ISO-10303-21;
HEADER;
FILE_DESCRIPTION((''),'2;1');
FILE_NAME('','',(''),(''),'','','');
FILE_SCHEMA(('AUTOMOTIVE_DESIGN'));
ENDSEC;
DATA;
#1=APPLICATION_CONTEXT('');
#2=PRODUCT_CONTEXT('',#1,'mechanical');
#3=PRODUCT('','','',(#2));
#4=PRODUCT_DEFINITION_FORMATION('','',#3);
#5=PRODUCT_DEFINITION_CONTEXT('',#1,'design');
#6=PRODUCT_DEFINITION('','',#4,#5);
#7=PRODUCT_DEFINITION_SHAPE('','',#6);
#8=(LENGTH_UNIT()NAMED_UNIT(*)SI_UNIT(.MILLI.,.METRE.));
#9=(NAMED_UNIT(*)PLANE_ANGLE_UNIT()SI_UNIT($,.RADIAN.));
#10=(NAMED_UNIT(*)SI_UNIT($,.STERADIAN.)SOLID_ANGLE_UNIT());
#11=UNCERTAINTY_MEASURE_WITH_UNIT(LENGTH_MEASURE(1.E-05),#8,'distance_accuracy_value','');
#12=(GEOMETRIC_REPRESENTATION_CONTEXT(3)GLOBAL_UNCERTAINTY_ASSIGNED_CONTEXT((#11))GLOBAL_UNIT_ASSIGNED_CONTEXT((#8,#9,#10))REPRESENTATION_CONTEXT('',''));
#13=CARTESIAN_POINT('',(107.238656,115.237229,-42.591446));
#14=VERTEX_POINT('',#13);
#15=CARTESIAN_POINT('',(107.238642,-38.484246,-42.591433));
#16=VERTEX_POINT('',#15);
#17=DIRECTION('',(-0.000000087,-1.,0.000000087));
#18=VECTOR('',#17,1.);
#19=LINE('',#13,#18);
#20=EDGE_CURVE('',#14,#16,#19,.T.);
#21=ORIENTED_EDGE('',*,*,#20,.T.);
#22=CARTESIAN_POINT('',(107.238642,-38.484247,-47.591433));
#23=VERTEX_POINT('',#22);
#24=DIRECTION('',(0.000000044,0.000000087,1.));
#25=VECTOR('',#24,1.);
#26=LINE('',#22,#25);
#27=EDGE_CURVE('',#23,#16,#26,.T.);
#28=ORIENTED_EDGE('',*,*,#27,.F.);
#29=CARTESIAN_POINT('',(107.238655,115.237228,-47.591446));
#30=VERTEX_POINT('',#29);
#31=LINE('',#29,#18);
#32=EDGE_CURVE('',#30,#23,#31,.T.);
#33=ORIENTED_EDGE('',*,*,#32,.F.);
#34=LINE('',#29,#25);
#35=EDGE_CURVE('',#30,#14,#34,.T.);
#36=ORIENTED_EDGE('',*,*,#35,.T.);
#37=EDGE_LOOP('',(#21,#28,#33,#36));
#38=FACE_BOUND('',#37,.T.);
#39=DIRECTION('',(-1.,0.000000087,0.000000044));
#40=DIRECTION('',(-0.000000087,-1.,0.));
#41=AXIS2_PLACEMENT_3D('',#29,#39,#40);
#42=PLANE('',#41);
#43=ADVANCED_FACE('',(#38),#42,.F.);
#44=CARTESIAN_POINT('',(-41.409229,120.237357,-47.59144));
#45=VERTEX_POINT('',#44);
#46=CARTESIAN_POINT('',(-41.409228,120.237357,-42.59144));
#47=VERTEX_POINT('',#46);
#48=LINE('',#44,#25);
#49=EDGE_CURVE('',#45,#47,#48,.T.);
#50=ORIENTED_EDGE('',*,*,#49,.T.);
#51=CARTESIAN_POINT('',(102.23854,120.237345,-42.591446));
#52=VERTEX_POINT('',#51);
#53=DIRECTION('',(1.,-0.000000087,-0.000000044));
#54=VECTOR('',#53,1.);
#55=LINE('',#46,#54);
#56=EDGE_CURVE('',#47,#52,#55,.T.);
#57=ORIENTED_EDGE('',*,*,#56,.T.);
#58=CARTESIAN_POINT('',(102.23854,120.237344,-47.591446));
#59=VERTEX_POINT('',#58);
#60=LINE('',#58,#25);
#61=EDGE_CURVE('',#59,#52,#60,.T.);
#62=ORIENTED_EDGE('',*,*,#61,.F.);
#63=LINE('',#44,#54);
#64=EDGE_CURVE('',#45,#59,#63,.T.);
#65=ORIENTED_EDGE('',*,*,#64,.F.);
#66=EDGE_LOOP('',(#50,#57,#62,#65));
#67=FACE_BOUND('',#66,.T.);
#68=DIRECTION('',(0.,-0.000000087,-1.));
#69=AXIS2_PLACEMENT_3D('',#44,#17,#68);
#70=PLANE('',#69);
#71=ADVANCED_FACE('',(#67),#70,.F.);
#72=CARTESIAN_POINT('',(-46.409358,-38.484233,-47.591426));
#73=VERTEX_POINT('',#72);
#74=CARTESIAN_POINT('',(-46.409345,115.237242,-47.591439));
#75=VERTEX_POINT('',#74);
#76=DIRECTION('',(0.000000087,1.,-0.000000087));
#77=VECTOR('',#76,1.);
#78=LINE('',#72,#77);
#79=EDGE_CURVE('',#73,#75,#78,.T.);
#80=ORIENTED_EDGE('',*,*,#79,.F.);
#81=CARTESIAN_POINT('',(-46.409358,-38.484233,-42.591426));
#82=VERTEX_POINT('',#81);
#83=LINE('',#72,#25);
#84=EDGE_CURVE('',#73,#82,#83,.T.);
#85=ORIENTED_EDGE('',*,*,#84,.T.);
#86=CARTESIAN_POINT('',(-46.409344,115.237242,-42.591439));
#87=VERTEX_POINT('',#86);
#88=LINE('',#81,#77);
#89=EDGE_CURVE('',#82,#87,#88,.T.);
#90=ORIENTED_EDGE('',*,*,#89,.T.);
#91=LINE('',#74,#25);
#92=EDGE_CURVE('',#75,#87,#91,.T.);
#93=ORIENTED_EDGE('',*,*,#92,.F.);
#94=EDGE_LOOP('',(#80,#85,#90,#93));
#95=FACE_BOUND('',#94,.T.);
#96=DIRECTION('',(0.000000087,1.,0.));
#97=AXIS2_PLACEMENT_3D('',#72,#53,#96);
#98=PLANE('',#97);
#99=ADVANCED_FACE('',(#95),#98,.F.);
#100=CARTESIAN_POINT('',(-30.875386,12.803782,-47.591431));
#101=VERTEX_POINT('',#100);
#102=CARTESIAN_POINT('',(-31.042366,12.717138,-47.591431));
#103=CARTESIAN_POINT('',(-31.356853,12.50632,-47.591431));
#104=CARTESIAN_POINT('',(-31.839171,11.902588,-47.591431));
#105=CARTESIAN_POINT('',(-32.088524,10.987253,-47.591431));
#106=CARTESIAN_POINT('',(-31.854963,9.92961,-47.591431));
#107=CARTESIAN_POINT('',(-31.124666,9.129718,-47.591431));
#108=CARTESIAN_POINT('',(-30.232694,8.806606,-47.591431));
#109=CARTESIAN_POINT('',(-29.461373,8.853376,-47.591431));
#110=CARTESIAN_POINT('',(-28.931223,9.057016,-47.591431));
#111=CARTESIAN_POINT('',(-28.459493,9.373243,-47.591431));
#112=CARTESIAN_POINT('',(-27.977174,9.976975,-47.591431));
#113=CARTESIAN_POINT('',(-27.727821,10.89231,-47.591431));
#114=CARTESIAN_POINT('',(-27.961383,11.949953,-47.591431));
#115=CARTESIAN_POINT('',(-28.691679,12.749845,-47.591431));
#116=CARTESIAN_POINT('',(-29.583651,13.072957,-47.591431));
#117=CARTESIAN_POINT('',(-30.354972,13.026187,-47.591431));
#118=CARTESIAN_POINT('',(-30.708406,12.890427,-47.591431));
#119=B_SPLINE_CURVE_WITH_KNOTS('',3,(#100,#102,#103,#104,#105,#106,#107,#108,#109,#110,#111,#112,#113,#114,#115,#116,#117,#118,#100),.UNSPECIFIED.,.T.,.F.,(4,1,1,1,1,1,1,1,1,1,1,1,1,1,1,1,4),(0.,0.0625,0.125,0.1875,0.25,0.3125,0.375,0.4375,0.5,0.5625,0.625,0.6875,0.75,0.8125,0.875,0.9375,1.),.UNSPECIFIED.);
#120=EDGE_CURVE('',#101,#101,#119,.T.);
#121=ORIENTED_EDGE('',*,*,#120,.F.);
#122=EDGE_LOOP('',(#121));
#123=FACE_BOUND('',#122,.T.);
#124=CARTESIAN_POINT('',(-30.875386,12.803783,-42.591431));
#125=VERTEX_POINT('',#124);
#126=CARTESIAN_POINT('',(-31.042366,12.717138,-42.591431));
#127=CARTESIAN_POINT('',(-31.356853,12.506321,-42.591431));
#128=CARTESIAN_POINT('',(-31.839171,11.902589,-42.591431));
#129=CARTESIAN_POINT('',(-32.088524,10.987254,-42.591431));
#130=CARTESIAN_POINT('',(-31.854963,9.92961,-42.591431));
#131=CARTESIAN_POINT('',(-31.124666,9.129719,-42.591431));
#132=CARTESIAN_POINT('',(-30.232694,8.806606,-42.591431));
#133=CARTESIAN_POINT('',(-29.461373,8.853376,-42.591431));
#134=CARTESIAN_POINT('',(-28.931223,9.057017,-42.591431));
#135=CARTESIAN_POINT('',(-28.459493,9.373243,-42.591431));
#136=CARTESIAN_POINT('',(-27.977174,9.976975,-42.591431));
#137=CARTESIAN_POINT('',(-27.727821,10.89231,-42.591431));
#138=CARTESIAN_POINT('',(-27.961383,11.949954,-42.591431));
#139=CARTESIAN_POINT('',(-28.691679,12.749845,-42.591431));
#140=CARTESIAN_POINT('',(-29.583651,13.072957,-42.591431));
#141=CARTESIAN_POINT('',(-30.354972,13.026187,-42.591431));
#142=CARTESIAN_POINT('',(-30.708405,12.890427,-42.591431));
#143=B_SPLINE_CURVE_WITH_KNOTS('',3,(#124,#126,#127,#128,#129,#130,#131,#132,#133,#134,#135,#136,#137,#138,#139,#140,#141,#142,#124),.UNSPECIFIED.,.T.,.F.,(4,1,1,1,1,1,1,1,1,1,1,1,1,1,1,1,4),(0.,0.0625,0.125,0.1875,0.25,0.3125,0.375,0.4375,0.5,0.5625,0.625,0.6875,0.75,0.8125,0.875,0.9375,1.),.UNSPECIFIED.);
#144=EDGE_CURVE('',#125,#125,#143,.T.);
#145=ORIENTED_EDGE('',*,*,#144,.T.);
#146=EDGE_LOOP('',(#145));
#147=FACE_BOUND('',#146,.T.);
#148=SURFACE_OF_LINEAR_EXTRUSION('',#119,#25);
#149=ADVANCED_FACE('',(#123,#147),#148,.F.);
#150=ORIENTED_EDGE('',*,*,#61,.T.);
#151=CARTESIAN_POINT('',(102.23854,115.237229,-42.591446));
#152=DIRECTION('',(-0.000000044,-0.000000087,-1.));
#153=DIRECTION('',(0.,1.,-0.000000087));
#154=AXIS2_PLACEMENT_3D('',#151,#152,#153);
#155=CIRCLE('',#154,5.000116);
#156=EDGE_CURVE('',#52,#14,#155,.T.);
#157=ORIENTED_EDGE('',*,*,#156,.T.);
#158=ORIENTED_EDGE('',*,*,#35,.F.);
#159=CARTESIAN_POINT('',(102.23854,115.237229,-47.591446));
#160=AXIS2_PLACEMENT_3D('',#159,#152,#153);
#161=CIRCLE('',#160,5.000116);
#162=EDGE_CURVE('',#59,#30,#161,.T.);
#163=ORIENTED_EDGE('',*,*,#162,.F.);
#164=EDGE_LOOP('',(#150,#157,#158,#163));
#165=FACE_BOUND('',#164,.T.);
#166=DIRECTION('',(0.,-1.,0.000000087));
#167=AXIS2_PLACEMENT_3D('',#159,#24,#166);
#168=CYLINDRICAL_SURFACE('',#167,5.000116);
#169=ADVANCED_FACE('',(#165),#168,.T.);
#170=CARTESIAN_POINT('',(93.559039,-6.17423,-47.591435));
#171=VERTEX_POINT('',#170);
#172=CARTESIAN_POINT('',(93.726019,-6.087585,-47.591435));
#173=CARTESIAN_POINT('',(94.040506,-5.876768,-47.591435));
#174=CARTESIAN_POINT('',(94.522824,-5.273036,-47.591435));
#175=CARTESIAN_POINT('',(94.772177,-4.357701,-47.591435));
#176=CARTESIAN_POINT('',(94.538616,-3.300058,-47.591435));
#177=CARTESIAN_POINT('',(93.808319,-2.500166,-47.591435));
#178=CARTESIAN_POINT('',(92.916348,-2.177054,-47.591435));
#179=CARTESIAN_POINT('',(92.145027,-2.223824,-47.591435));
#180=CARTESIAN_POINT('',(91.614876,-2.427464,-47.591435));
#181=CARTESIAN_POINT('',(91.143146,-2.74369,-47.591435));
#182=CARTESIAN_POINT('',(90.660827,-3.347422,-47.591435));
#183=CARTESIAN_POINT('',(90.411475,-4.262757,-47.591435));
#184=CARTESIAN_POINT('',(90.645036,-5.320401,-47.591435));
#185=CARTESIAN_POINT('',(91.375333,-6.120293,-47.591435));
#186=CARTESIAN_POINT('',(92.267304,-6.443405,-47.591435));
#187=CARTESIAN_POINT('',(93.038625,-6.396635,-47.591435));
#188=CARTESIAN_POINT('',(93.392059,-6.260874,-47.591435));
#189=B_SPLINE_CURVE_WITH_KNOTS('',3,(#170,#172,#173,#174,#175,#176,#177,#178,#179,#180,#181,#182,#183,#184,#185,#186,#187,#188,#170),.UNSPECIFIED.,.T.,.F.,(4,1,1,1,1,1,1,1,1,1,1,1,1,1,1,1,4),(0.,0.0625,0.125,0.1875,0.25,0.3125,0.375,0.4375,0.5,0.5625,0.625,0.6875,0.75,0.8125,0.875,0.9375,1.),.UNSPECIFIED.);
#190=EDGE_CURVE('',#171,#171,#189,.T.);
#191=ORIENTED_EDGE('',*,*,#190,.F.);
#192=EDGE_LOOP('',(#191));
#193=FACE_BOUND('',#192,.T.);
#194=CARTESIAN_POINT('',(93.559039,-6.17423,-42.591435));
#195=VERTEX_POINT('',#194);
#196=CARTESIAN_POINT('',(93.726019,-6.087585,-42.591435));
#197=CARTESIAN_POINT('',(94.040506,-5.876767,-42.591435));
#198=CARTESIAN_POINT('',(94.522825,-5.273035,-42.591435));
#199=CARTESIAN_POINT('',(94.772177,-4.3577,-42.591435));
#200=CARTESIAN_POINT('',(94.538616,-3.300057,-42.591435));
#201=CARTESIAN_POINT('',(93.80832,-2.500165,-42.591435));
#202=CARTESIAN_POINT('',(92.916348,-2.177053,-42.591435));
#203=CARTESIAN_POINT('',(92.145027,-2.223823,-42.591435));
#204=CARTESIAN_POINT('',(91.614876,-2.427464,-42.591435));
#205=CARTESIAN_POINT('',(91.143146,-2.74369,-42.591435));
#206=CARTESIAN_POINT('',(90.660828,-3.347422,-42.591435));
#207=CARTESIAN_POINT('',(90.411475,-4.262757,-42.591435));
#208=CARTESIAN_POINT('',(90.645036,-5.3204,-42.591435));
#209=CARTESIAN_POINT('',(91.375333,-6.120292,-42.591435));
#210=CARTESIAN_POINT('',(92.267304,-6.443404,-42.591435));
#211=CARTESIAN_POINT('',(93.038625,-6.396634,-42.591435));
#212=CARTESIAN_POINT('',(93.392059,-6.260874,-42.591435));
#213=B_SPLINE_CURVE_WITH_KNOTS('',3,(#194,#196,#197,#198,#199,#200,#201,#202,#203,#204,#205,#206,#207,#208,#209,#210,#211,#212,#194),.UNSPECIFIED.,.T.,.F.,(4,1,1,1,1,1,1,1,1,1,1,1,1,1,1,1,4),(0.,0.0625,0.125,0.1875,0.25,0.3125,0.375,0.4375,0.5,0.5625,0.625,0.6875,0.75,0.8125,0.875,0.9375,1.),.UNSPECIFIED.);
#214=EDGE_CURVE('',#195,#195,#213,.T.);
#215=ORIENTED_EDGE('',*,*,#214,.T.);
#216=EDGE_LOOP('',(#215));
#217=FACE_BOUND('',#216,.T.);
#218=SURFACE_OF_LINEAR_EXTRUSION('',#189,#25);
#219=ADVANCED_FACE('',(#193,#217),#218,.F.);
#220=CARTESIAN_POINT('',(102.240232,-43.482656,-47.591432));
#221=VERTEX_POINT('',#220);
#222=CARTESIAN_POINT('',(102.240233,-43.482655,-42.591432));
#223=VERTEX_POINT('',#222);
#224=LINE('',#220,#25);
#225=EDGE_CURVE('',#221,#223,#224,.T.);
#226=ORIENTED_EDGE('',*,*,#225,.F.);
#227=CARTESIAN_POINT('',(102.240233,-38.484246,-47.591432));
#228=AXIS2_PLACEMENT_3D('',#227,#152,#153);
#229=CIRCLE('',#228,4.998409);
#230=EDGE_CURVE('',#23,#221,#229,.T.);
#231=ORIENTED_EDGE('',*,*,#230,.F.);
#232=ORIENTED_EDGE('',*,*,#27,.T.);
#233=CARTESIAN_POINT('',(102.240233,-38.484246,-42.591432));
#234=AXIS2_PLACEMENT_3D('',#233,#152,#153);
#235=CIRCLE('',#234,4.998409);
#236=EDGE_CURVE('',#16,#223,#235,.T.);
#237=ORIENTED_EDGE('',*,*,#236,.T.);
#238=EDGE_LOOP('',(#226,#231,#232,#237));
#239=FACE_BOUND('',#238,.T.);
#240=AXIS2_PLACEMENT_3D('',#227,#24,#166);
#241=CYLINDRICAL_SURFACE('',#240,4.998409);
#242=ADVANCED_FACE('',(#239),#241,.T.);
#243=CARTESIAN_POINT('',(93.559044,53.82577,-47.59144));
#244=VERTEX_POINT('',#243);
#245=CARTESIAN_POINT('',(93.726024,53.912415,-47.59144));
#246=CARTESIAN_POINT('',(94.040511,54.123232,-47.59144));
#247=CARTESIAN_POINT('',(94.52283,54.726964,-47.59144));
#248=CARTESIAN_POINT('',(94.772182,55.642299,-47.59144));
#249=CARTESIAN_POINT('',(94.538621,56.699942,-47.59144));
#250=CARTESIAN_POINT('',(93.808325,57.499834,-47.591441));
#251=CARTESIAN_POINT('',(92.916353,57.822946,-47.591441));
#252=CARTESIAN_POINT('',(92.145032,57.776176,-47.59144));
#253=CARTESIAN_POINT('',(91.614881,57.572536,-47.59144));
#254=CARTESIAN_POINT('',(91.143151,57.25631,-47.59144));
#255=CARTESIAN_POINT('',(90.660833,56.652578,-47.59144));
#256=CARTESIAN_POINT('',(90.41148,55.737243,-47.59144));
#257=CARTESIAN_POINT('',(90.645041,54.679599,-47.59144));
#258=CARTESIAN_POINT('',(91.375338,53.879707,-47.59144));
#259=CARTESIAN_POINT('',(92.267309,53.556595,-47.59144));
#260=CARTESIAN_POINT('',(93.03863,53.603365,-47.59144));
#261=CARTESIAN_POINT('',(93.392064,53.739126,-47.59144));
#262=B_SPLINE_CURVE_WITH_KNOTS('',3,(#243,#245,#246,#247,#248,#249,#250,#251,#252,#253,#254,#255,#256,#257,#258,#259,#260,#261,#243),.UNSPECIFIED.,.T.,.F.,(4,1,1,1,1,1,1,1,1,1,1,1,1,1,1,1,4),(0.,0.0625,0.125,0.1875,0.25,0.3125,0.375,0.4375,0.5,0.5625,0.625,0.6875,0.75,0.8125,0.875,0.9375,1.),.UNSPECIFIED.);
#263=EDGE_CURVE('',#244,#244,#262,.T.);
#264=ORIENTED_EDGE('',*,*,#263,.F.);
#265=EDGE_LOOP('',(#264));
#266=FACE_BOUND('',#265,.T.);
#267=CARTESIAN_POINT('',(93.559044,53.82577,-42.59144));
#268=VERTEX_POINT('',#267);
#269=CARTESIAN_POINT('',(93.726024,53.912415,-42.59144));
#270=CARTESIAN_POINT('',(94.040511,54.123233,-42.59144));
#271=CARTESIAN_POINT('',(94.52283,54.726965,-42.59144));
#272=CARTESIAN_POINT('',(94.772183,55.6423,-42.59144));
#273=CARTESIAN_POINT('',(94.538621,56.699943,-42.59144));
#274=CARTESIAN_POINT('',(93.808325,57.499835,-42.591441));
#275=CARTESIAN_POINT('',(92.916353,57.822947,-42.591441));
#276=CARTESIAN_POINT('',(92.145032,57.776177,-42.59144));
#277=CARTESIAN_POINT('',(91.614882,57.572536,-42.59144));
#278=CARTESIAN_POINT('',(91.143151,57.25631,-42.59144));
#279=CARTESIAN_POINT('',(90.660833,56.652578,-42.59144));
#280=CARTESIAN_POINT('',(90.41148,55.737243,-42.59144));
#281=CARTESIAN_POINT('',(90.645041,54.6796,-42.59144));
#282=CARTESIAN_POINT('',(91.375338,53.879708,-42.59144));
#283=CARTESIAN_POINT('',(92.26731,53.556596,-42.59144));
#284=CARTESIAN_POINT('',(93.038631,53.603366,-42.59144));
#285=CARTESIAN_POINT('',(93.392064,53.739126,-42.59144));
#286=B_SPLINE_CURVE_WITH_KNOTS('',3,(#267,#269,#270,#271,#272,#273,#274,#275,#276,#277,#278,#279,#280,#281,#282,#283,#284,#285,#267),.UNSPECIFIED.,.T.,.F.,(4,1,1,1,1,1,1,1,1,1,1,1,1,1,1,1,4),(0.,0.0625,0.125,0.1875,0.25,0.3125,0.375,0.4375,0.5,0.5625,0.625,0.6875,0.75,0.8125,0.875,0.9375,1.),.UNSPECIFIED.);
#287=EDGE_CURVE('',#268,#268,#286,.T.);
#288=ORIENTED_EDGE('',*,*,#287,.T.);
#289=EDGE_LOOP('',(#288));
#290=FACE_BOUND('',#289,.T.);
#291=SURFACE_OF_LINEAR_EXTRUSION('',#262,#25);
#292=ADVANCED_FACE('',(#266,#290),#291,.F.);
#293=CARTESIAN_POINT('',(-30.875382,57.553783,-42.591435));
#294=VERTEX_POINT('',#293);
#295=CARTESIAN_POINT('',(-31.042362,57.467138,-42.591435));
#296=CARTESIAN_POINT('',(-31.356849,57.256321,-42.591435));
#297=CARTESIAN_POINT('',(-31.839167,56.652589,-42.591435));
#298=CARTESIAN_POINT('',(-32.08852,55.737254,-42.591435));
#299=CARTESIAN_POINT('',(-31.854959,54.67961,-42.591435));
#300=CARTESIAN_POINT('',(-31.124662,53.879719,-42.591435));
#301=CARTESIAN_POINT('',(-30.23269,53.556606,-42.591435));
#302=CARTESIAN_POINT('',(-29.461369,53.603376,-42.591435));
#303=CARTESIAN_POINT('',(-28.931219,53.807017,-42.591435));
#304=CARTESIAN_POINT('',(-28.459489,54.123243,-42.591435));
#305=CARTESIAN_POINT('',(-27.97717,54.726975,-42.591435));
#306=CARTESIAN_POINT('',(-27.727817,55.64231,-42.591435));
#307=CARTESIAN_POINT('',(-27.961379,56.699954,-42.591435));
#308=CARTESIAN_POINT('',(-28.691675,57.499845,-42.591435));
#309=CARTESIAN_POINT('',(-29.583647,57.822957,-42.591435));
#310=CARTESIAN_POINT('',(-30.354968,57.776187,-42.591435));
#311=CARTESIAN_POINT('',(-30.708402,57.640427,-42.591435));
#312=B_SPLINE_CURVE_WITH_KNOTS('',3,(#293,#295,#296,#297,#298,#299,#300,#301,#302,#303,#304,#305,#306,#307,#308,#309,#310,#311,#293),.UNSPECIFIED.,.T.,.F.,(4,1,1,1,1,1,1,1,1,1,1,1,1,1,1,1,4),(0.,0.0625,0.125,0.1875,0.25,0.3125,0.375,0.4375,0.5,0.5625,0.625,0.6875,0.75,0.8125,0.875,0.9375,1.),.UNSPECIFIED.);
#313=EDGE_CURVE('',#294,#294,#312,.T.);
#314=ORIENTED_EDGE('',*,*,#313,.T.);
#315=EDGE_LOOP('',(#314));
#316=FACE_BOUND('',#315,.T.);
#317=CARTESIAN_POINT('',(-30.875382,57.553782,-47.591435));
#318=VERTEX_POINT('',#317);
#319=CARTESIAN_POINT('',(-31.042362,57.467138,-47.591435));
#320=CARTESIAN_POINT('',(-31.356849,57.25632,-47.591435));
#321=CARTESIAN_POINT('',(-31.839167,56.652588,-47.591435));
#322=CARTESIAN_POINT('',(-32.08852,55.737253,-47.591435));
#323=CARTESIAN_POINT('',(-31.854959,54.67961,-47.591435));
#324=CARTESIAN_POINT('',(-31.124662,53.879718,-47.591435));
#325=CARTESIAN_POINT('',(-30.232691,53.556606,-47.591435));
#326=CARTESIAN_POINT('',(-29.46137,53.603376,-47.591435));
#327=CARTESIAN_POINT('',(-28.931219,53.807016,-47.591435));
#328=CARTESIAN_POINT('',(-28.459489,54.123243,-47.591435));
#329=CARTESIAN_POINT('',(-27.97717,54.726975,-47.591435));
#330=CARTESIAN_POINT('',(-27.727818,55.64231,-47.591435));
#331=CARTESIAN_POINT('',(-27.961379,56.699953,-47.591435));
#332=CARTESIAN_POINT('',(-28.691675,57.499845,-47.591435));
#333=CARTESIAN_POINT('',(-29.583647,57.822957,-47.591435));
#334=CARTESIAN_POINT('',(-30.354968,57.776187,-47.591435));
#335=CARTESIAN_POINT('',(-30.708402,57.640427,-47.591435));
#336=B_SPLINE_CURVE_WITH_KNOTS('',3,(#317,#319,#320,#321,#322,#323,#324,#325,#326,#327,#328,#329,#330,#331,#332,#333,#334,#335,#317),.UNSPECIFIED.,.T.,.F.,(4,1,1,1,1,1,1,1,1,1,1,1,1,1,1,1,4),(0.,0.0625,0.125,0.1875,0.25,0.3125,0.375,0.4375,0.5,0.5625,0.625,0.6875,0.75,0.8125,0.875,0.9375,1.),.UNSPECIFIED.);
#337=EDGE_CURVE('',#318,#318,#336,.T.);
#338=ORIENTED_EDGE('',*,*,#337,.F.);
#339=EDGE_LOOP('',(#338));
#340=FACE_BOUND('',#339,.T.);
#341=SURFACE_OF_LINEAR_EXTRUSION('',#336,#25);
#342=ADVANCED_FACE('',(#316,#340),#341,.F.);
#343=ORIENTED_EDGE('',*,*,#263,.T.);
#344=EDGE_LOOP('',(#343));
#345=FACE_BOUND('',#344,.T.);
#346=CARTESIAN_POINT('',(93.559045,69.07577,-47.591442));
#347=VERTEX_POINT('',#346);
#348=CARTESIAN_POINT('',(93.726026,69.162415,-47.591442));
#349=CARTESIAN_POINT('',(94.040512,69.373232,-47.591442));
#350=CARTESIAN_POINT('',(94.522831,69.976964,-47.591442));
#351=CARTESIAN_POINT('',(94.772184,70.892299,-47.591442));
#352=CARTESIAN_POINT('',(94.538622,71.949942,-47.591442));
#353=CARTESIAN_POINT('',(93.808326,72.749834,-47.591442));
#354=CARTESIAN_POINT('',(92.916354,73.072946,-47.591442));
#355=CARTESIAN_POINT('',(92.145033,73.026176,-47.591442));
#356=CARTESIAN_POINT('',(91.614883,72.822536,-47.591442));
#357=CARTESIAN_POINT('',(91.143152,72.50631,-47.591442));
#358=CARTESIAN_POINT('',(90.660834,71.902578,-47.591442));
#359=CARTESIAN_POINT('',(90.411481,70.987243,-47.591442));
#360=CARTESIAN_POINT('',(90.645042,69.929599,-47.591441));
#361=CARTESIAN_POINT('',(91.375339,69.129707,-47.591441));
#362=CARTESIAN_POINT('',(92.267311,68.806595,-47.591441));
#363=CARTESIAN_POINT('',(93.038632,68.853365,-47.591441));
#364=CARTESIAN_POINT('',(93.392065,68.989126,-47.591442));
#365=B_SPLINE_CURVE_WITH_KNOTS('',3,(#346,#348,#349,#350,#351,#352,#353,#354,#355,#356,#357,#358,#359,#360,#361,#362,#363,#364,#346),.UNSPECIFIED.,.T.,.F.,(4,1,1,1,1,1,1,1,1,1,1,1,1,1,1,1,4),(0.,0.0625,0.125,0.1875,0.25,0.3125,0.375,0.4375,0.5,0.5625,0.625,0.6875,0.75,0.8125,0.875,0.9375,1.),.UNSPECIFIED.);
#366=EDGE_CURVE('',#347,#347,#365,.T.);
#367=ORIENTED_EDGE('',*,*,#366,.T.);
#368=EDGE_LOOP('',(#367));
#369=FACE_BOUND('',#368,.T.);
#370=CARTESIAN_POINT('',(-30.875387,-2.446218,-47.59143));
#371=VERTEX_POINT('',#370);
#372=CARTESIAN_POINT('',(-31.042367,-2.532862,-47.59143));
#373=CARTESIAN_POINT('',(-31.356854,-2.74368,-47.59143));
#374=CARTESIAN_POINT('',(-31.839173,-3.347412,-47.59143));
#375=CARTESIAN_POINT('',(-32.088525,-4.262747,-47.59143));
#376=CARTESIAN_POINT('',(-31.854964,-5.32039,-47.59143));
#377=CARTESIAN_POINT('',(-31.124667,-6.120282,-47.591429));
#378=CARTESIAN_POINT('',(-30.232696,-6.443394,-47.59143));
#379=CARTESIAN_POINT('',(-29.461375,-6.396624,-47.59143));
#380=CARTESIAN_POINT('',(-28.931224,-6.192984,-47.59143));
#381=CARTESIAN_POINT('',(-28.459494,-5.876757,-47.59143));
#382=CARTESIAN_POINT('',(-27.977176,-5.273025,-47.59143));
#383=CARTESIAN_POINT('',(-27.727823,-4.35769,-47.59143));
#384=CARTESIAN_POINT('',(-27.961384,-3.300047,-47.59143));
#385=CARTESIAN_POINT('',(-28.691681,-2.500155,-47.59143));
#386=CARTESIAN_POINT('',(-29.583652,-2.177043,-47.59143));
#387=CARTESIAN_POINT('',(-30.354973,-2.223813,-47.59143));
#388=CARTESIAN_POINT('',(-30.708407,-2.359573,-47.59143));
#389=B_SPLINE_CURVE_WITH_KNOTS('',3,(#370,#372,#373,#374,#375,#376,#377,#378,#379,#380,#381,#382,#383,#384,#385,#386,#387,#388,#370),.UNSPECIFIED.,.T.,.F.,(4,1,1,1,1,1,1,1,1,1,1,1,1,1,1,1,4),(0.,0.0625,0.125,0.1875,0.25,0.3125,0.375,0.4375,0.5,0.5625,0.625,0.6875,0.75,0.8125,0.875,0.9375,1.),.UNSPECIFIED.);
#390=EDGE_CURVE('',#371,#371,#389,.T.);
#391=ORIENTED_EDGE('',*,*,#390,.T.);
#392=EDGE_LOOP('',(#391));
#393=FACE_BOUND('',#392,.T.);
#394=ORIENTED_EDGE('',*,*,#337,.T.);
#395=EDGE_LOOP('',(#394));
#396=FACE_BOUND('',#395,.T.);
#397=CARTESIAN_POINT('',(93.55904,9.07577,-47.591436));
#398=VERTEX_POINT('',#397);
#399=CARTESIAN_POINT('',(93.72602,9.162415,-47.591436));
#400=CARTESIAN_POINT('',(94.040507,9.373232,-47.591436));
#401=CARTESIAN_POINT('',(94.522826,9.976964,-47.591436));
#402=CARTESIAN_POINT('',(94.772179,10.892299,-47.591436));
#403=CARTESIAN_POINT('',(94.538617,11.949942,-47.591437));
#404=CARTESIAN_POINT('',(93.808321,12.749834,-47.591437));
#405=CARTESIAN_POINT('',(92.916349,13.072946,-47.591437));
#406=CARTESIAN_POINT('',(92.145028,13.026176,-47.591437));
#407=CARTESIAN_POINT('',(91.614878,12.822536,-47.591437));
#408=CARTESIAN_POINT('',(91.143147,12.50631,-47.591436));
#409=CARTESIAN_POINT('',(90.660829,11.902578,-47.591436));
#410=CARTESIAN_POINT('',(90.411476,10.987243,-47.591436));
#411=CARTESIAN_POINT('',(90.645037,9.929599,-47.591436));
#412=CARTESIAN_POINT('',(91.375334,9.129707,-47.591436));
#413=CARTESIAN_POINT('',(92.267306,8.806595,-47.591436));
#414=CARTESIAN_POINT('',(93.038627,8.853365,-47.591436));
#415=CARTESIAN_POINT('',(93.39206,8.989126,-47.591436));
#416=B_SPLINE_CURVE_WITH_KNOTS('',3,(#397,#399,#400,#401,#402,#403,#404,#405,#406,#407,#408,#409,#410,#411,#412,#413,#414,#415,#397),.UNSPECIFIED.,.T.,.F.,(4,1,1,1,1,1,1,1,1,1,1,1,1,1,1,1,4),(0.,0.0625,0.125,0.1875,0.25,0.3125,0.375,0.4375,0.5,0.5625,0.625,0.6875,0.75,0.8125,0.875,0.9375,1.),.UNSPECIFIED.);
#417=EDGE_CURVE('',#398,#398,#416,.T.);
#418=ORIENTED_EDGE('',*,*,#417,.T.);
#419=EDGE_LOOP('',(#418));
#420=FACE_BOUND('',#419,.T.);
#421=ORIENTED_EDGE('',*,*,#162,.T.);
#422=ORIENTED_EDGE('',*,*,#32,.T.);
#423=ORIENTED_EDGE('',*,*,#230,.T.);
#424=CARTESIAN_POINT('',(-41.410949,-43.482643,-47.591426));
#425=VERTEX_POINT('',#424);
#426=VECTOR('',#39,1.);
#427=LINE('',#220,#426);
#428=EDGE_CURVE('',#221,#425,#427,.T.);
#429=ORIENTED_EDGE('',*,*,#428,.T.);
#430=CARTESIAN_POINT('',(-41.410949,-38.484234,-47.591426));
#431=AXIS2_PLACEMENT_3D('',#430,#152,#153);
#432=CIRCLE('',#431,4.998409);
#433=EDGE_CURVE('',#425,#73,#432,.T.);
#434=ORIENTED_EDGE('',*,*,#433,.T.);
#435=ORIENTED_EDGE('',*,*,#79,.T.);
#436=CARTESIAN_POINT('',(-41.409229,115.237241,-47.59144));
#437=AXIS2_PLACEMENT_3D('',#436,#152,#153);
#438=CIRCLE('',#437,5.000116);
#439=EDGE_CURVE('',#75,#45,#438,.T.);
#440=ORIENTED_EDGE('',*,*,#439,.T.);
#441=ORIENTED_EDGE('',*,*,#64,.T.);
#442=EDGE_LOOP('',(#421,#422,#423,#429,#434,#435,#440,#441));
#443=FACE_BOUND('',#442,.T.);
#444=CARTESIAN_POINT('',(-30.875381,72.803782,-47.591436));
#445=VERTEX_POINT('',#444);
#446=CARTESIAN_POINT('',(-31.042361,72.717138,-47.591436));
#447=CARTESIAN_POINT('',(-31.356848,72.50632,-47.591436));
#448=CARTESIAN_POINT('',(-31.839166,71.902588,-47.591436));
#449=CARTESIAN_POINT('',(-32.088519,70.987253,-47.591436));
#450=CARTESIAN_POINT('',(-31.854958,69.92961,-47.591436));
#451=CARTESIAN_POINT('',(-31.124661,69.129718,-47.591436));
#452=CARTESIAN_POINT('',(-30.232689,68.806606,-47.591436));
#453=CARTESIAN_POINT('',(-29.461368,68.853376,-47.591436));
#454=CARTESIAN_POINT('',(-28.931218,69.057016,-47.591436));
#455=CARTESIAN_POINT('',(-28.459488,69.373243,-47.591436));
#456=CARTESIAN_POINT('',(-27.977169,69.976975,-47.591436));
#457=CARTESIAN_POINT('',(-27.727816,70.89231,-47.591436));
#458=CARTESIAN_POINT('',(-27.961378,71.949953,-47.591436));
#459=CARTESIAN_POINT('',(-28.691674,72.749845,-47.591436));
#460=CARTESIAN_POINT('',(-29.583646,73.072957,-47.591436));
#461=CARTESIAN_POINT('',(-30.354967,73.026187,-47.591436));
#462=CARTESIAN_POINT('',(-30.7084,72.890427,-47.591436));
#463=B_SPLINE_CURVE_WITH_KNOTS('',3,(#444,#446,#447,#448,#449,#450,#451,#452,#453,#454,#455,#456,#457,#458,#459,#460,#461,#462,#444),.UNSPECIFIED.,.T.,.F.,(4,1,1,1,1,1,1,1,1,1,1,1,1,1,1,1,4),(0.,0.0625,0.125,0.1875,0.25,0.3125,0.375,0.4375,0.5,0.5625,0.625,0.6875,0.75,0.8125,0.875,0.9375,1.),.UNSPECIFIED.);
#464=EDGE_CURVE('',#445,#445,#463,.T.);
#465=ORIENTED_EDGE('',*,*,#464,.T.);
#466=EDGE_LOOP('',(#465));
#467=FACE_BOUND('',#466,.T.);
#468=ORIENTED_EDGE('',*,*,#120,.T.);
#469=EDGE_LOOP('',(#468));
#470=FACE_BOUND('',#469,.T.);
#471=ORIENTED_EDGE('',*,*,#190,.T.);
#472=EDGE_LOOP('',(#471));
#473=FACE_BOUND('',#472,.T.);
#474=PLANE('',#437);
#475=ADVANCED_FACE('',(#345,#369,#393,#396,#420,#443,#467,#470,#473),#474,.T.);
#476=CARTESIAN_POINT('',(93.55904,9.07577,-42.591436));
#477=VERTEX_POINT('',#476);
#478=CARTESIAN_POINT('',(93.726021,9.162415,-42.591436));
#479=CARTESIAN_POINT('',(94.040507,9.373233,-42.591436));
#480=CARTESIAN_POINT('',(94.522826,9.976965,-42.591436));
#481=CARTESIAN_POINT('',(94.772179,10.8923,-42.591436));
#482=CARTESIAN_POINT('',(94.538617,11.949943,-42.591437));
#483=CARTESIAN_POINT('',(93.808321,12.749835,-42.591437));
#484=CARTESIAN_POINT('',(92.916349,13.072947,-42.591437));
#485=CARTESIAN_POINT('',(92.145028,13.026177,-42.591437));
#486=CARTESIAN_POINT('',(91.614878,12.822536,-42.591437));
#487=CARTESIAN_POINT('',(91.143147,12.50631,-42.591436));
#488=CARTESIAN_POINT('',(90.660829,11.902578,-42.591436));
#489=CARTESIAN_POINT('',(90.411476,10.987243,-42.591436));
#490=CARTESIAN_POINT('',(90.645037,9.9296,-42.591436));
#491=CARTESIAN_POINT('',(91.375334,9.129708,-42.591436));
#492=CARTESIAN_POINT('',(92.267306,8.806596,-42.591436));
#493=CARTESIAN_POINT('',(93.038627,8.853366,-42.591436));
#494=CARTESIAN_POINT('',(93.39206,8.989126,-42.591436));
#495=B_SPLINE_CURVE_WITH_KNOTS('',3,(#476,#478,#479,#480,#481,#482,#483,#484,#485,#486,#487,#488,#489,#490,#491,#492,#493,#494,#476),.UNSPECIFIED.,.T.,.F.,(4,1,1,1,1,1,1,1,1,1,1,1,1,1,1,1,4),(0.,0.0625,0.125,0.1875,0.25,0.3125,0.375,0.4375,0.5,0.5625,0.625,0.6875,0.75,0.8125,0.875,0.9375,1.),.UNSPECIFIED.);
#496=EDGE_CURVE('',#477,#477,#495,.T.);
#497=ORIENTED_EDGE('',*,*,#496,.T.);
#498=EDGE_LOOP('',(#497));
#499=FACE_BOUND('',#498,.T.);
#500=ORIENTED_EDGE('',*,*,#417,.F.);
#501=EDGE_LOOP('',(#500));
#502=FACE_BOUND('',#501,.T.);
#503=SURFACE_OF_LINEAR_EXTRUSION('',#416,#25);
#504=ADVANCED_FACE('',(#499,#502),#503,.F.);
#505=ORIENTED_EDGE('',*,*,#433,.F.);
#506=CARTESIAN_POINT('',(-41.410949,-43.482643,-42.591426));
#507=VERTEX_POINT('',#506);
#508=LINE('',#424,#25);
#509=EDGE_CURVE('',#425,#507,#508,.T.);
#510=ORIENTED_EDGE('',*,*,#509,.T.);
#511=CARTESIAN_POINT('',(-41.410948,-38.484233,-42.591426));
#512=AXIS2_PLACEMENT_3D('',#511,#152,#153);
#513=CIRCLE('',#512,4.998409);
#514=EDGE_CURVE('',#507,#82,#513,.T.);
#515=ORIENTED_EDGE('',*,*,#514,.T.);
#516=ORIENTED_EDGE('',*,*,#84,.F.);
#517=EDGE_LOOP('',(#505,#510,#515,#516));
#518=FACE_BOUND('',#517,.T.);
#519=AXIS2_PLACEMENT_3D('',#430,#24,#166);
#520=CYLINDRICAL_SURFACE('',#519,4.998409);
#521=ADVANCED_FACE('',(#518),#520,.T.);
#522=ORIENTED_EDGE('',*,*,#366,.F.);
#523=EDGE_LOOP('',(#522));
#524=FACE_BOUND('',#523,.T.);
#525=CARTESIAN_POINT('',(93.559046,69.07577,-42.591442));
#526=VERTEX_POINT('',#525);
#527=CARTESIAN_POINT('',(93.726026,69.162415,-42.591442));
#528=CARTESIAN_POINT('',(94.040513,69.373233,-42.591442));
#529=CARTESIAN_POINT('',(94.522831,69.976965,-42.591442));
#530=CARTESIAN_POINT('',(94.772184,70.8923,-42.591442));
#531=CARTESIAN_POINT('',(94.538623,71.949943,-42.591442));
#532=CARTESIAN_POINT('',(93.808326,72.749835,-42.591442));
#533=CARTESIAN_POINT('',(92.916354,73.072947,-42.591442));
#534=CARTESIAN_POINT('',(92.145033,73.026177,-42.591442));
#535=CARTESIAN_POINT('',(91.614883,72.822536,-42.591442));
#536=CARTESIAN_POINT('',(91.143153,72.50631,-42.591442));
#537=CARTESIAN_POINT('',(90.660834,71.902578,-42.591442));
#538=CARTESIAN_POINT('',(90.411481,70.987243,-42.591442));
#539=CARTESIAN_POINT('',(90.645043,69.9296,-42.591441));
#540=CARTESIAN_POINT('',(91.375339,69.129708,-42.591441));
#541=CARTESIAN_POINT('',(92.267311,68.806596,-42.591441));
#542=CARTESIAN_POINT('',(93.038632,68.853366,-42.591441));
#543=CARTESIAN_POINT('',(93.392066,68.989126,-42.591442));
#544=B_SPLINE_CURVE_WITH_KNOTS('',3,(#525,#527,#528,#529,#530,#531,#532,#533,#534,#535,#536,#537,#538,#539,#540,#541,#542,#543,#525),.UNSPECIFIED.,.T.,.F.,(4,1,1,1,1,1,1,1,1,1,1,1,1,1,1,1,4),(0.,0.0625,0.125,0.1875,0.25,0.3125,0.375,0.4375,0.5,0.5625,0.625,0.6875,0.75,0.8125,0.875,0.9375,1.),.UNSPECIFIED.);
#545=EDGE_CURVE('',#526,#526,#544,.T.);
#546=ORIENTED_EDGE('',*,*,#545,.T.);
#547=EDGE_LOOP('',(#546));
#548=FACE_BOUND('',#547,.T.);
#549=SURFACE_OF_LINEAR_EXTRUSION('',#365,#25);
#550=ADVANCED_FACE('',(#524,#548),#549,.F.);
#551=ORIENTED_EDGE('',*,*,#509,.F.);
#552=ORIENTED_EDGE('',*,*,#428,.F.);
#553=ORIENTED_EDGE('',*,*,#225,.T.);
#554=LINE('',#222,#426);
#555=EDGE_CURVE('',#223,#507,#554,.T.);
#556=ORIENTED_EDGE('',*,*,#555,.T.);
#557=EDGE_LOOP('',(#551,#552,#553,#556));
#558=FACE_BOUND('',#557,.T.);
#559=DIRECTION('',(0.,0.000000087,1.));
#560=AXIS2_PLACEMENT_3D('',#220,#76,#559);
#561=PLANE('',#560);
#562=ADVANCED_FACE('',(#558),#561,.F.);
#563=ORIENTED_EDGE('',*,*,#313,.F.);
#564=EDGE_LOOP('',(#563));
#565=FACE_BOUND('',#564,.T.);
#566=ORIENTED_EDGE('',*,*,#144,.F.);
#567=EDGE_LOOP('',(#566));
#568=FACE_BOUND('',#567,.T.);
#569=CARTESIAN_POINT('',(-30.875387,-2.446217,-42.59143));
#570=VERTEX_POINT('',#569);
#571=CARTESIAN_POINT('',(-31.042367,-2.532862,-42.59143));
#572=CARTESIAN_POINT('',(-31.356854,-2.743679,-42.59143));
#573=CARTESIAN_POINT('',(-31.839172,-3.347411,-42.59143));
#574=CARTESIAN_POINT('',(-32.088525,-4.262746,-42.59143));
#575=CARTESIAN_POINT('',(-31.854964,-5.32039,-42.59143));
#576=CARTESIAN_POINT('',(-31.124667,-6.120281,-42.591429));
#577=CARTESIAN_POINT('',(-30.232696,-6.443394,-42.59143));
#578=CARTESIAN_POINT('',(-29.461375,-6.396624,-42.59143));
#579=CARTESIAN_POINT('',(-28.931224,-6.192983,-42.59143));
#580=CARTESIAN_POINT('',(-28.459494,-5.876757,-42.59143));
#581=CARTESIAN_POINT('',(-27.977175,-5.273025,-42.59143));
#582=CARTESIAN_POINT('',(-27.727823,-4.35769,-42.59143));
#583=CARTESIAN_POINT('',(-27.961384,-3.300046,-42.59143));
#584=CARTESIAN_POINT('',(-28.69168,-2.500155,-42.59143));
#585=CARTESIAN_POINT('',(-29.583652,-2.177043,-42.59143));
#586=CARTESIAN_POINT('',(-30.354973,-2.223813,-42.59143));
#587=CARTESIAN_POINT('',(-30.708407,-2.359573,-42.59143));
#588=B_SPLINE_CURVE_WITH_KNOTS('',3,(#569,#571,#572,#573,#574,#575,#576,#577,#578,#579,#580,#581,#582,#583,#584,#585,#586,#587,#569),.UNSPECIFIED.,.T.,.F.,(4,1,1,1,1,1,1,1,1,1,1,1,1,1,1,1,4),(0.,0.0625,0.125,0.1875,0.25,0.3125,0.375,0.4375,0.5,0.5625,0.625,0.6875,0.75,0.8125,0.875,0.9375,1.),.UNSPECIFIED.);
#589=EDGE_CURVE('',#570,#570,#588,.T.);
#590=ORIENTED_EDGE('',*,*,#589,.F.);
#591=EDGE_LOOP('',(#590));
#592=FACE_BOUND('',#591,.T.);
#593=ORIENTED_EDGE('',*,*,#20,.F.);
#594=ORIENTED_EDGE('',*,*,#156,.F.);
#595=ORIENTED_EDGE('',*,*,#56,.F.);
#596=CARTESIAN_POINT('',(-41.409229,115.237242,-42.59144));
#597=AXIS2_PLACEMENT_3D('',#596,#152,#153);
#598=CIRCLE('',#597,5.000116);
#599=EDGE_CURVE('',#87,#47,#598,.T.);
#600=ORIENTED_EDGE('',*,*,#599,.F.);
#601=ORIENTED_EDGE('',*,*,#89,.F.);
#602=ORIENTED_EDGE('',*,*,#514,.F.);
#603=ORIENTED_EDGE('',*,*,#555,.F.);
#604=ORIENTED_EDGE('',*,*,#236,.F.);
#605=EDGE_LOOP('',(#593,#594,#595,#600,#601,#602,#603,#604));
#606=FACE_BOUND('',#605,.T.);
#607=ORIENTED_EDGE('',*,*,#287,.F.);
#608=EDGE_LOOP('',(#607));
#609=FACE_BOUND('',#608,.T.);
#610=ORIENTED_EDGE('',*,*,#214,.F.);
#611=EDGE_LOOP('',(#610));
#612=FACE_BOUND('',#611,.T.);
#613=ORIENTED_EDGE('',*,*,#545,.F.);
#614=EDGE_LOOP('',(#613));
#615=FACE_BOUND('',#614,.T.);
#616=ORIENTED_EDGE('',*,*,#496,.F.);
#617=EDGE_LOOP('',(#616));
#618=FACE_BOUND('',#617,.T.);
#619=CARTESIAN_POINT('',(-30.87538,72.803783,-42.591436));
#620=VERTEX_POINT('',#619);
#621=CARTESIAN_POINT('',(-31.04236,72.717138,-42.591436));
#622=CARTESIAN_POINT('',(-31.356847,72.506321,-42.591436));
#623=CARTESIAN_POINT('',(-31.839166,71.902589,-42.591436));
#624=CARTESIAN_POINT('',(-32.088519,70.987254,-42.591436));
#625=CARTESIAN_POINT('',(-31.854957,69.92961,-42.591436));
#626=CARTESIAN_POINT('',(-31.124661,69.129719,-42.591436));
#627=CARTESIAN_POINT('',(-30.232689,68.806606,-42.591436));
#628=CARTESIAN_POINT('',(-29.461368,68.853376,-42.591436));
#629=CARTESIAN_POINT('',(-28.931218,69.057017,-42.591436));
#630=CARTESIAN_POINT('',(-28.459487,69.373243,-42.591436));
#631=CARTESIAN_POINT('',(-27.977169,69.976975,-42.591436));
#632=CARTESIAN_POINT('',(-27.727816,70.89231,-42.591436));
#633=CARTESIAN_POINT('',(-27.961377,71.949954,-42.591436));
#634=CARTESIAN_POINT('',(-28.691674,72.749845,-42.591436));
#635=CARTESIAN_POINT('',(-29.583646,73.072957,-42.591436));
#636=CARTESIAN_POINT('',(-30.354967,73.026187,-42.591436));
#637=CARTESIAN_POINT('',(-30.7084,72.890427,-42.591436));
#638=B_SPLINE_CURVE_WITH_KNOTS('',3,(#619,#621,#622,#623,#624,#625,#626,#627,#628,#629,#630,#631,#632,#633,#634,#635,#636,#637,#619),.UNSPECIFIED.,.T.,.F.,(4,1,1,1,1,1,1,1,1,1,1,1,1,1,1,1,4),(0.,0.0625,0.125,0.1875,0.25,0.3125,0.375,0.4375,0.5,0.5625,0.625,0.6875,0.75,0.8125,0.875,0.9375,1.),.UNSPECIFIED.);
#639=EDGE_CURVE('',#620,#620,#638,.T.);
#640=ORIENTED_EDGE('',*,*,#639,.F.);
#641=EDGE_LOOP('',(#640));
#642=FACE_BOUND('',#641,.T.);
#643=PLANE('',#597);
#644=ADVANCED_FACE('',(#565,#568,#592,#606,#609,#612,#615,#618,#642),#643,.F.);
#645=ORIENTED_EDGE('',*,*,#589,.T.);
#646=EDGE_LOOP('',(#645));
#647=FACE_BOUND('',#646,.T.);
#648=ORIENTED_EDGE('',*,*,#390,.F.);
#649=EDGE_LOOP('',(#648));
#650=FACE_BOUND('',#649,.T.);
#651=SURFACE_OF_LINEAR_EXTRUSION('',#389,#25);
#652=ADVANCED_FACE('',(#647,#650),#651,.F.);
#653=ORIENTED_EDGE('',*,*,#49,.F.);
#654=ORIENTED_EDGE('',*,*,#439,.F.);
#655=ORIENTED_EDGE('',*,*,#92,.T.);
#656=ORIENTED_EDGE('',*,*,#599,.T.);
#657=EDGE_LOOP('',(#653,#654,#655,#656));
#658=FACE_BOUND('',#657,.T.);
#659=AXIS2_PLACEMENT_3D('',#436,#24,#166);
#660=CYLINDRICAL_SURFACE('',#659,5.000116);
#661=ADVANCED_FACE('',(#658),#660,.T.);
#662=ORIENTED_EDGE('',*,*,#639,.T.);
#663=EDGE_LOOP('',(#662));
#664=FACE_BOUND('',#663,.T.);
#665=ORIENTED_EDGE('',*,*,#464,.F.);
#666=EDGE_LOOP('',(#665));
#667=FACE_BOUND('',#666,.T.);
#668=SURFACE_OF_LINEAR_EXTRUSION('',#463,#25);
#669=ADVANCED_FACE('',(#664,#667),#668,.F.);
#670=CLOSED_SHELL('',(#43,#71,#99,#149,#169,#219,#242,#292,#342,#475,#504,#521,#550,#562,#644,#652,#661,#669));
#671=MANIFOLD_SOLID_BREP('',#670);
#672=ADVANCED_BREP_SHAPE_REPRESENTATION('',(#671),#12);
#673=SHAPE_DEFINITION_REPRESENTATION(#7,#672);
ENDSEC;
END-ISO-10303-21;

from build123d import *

# Parameters (mm, degrees)
EXTRUDE_1_DEPTH     = 5
CUT_EXTRUDE_START   = -5
CUT_EXTRUDE_1_DEPTH = 5


# Read off the part's stored shape, not the designer's step: 切除-拉伸1
with BuildPart() as part:
    # 草图1 → 凸台-拉伸1 (new body)
    with BuildSketch(Plane(origin=(-1.862e-06, -3.723e-06, -42.591431388), x_dir=(-0.999999999999999, 3.821371455846319e-15, 4.3711395709347256e-08), z_dir=(-4.371139570934742e-08, -8.742277371457049e-08, -0.9999999999999953))):
        with BuildLine():
            Line((41.409226449, 120.237361108), (-102.238542261, 120.237348614))
            ThreePointArc((-102.238542261, 120.237348614), (-105.774157813, 118.772848341), (-107.238657471, 115.237232534))
            Line((-107.238657471, 115.237232534), (-107.238644101, -38.484242555))
            ThreePointArc((-107.238644101, -38.484242555), (-105.774643614, -42.018651515), (-102.2402344, -43.482651386))
            Line((-102.2402344, -43.482651386), (41.410947067, -43.482638892))
            ThreePointArc((41.410947067, -43.482638892), (44.945356028, -42.018638406), (46.409355899, -38.484229191))
            Line((46.409355899, -38.484229191), (46.409342529, 115.237245898))
            ThreePointArc((46.409342529, 115.237245898), (44.944842256, 118.77286145), (41.409226449, 120.237361108))
        make_face()
    extrude(amount=EXTRUDE_1_DEPTH)

    # 切除-拉伸1 outline → 切除-拉伸1 (cut)
    with BuildSketch(Plane(origin=(-1.862e-06, -3.723e-06, -42.591431388), x_dir=(0.999999999999999, -3.82137145584633e-15, -4.371139570934726e-08), z_dir=(4.371139570934743e-08, 8.742277371457055e-08, 0.9999999999999953)).offset(CUT_EXTRUDE_START)):
        with BuildLine():
            add(Edge.make_bspline(
                [(-30.875379785, 57.553786493), (-31.042359895, 57.46714204), (-31.356846814, 57.256324434), (-31.839165273, 56.652592362), (-32.088518151, 55.73725734), (-31.854956828, 54.679614122), (-31.124660201, 53.879722314), (-30.232688432, 53.556610222), (-29.461367436, 53.603380207), (-28.931217158, 53.807020515), (-28.45948678, 54.123246924), (-27.97716832, 54.726978996), (-27.727815442, 55.642314018), (-27.961376765, 56.699957236), (-28.691673393, 57.499849044), (-29.583645161, 57.822961136), (-30.354966158, 57.776191151), (-30.708399676, 57.640430946), (-30.875379785, 57.553786493)],
                knots=[0, 0, 0, 0, 0.0625, 0.125, 0.1875, 0.25, 0.3125, 0.375, 0.4375, 0.5, 0.5625, 0.625, 0.6875, 0.75, 0.8125, 0.875, 0.9375, 1, 1, 1, 1], degree=3))
        make_face()
        with BuildLine():
            add(Edge.make_bspline(
                [(93.559040973, -6.17422579), (93.726021083, -6.087581337), (94.040508002, -5.876763731), (94.522826461, -5.273031659), (94.772179339, -4.357696637), (94.538618016, -3.300053419), (93.808321389, -2.500161611), (92.91634962, -2.177049518), (92.145028624, -2.223819504), (91.614878346, -2.427459812), (91.143147968, -2.743686221), (90.660829508, -3.347418293), (90.411476631, -4.262753315), (90.645037953, -5.320396533), (91.375334581, -6.120288341), (92.267306349, -6.443400433), (93.038627346, -6.396630448), (93.392060864, -6.260870243), (93.559040973, -6.17422579)],
                knots=[0, 0, 0, 0, 0.0625, 0.125, 0.1875, 0.25, 0.3125, 0.375, 0.4375, 0.5, 0.5625, 0.625, 0.6875, 0.75, 0.8125, 0.875, 0.9375, 1, 1, 1, 1], degree=3))
        make_face()
        with BuildLine():
            add(Edge.make_bspline(
                [(-30.875383678, 12.803786493), (-31.042363787, 12.71714204), (-31.356850706, 12.506324434), (-31.839169165, 11.902592362), (-32.088522043, 10.98725734), (-31.85496072, 9.929614122), (-31.124664093, 9.129722314), (-30.232692324, 8.806610222), (-29.461371328, 8.853380207), (-28.93122105, 9.057020515), (-28.459490672, 9.373246924), (-27.977172213, 9.976978996), (-27.727819335, 10.892314018), (-27.961380657, 11.949957236), (-28.691677285, 12.749849044), (-29.583649054, 13.072961136), (-30.35497005, 13.026191151), (-30.708403568, 12.890430946), (-30.875383678, 12.803786493)],
                knots=[0, 0, 0, 0, 0.0625, 0.125, 0.1875, 0.25, 0.3125, 0.375, 0.4375, 0.5, 0.5625, 0.625, 0.6875, 0.75, 0.8125, 0.875, 0.9375, 1, 1, 1, 1], degree=3))
        make_face()
        with BuildLine():
            add(Edge.make_bspline(
                [(-30.875385004, -2.446213507), (-31.042365113, -2.53285796), (-31.356852032, -2.743675566), (-31.839170492, -3.347407638), (-32.088523369, -4.26274266), (-31.854962047, -5.320385878), (-31.124665419, -6.120277686), (-30.232693651, -6.443389778), (-29.461372654, -6.396619793), (-28.931222377, -6.192979485), (-28.459491998, -5.876753076), (-27.977173539, -5.273021004), (-27.727820661, -4.357685982), (-27.961381984, -3.300042764), (-28.691678611, -2.500150956), (-29.58365038, -2.177038864), (-30.354971376, -2.223808849), (-30.708404895, -2.359569054), (-30.875385004, -2.446213507)],
                knots=[0, 0, 0, 0, 0.0625, 0.125, 0.1875, 0.25, 0.3125, 0.375, 0.4375, 0.5, 0.5625, 0.625, 0.6875, 0.75, 0.8125, 0.875, 0.9375, 1, 1, 1, 1], degree=3))
        make_face()
        with BuildLine():
            add(Edge.make_bspline(
                [(93.5590423, 9.07577421), (93.726022409, 9.162418663), (94.040509328, 9.373236269), (94.522827787, 9.976968341), (94.772180665, 10.892303363), (94.538619343, 11.949946581), (93.808322715, 12.749838389), (92.916350946, 13.072950482), (92.14502995, 13.026180496), (91.614879673, 12.822540188), (91.143149294, 12.506313779), (90.660830835, 11.902581707), (90.411477957, 10.987246685), (90.64503928, 9.929603467), (91.375335907, 9.129711659), (92.267307676, 8.806599567), (93.038628672, 8.853369552), (93.392062191, 8.989129757), (93.5590423, 9.07577421)],
                knots=[0, 0, 0, 0, 0.0625, 0.125, 0.1875, 0.25, 0.3125, 0.375, 0.4375, 0.5, 0.5625, 0.625, 0.6875, 0.75, 0.8125, 0.875, 0.9375, 1, 1, 1, 1], degree=3))
        make_face()
        with BuildLine():
            add(Edge.make_bspline(
                [(93.559046192, 53.82577421), (93.726026301, 53.912418663), (94.04051322, 54.123236269), (94.52283168, 54.726968341), (94.772184558, 55.642303363), (94.538623235, 56.699946581), (93.808326607, 57.499838389), (92.916354839, 57.822950482), (92.145033842, 57.776180496), (91.614883565, 57.572540188), (91.143153186, 57.256313779), (90.660834727, 56.652581707), (90.411481849, 55.737246685), (90.645043172, 54.679603467), (91.375339799, 53.879711659), (92.267311568, 53.556599567), (93.038632564, 53.603369552), (93.392066083, 53.739129757), (93.559046192, 53.82577421)],
                knots=[0, 0, 0, 0, 0.0625, 0.125, 0.1875, 0.25, 0.3125, 0.375, 0.4375, 0.5, 0.5625, 0.625, 0.6875, 0.75, 0.8125, 0.875, 0.9375, 1, 1, 1, 1], degree=3))
        make_face()
        with BuildLine():
            add(Edge.make_bspline(
                [(93.559047518, 69.07577421), (93.726027628, 69.162418663), (94.040514547, 69.373236269), (94.522833006, 69.976968341), (94.772185884, 70.892303363), (94.538624561, 71.949946581), (93.808327934, 72.749838389), (92.916356165, 73.072950482), (92.145035169, 73.026180496), (91.614884891, 72.822540188), (91.143154513, 72.506313779), (90.660836053, 71.902581707), (90.411483176, 70.987246685), (90.645044498, 69.929603467), (91.375341126, 69.129711659), (92.267312894, 68.806599567), (93.038633891, 68.853369552), (93.392067409, 68.989129757), (93.559047518, 69.07577421)],
                knots=[0, 0, 0, 0, 0.0625, 0.125, 0.1875, 0.25, 0.3125, 0.375, 0.4375, 0.5, 0.5625, 0.625, 0.6875, 0.75, 0.8125, 0.875, 0.9375, 1, 1, 1, 1], degree=3))
        make_face()
        with BuildLine():
            add(Edge.make_bspline(
                [(-30.875378459, 72.803786493), (-31.042358568, 72.71714204), (-31.356845487, 72.506324434), (-31.839163947, 71.902592362), (-32.088516824, 70.98725734), (-31.854955502, 69.929614122), (-31.124658874, 69.129722314), (-30.232687106, 68.806610222), (-29.461366109, 68.853380207), (-28.931215832, 69.057020515), (-28.459485453, 69.373246924), (-27.977166994, 69.976978996), (-27.727814116, 70.892314018), (-27.961375439, 71.949957236), (-28.691672066, 72.749849044), (-29.583643835, 73.072961136), (-30.354964831, 73.026191151), (-30.70839835, 72.890430946), (-30.875378459, 72.803786493)],
                knots=[0, 0, 0, 0, 0.0625, 0.125, 0.1875, 0.25, 0.3125, 0.375, 0.4375, 0.5, 0.5625, 0.625, 0.6875, 0.75, 0.8125, 0.875, 0.9375, 1, 1, 1, 1], degree=3))
        make_face()
    extrude(amount=CUT_EXTRUDE_1_DEPTH, mode=Mode.SUBTRACT)


solid = part.part
